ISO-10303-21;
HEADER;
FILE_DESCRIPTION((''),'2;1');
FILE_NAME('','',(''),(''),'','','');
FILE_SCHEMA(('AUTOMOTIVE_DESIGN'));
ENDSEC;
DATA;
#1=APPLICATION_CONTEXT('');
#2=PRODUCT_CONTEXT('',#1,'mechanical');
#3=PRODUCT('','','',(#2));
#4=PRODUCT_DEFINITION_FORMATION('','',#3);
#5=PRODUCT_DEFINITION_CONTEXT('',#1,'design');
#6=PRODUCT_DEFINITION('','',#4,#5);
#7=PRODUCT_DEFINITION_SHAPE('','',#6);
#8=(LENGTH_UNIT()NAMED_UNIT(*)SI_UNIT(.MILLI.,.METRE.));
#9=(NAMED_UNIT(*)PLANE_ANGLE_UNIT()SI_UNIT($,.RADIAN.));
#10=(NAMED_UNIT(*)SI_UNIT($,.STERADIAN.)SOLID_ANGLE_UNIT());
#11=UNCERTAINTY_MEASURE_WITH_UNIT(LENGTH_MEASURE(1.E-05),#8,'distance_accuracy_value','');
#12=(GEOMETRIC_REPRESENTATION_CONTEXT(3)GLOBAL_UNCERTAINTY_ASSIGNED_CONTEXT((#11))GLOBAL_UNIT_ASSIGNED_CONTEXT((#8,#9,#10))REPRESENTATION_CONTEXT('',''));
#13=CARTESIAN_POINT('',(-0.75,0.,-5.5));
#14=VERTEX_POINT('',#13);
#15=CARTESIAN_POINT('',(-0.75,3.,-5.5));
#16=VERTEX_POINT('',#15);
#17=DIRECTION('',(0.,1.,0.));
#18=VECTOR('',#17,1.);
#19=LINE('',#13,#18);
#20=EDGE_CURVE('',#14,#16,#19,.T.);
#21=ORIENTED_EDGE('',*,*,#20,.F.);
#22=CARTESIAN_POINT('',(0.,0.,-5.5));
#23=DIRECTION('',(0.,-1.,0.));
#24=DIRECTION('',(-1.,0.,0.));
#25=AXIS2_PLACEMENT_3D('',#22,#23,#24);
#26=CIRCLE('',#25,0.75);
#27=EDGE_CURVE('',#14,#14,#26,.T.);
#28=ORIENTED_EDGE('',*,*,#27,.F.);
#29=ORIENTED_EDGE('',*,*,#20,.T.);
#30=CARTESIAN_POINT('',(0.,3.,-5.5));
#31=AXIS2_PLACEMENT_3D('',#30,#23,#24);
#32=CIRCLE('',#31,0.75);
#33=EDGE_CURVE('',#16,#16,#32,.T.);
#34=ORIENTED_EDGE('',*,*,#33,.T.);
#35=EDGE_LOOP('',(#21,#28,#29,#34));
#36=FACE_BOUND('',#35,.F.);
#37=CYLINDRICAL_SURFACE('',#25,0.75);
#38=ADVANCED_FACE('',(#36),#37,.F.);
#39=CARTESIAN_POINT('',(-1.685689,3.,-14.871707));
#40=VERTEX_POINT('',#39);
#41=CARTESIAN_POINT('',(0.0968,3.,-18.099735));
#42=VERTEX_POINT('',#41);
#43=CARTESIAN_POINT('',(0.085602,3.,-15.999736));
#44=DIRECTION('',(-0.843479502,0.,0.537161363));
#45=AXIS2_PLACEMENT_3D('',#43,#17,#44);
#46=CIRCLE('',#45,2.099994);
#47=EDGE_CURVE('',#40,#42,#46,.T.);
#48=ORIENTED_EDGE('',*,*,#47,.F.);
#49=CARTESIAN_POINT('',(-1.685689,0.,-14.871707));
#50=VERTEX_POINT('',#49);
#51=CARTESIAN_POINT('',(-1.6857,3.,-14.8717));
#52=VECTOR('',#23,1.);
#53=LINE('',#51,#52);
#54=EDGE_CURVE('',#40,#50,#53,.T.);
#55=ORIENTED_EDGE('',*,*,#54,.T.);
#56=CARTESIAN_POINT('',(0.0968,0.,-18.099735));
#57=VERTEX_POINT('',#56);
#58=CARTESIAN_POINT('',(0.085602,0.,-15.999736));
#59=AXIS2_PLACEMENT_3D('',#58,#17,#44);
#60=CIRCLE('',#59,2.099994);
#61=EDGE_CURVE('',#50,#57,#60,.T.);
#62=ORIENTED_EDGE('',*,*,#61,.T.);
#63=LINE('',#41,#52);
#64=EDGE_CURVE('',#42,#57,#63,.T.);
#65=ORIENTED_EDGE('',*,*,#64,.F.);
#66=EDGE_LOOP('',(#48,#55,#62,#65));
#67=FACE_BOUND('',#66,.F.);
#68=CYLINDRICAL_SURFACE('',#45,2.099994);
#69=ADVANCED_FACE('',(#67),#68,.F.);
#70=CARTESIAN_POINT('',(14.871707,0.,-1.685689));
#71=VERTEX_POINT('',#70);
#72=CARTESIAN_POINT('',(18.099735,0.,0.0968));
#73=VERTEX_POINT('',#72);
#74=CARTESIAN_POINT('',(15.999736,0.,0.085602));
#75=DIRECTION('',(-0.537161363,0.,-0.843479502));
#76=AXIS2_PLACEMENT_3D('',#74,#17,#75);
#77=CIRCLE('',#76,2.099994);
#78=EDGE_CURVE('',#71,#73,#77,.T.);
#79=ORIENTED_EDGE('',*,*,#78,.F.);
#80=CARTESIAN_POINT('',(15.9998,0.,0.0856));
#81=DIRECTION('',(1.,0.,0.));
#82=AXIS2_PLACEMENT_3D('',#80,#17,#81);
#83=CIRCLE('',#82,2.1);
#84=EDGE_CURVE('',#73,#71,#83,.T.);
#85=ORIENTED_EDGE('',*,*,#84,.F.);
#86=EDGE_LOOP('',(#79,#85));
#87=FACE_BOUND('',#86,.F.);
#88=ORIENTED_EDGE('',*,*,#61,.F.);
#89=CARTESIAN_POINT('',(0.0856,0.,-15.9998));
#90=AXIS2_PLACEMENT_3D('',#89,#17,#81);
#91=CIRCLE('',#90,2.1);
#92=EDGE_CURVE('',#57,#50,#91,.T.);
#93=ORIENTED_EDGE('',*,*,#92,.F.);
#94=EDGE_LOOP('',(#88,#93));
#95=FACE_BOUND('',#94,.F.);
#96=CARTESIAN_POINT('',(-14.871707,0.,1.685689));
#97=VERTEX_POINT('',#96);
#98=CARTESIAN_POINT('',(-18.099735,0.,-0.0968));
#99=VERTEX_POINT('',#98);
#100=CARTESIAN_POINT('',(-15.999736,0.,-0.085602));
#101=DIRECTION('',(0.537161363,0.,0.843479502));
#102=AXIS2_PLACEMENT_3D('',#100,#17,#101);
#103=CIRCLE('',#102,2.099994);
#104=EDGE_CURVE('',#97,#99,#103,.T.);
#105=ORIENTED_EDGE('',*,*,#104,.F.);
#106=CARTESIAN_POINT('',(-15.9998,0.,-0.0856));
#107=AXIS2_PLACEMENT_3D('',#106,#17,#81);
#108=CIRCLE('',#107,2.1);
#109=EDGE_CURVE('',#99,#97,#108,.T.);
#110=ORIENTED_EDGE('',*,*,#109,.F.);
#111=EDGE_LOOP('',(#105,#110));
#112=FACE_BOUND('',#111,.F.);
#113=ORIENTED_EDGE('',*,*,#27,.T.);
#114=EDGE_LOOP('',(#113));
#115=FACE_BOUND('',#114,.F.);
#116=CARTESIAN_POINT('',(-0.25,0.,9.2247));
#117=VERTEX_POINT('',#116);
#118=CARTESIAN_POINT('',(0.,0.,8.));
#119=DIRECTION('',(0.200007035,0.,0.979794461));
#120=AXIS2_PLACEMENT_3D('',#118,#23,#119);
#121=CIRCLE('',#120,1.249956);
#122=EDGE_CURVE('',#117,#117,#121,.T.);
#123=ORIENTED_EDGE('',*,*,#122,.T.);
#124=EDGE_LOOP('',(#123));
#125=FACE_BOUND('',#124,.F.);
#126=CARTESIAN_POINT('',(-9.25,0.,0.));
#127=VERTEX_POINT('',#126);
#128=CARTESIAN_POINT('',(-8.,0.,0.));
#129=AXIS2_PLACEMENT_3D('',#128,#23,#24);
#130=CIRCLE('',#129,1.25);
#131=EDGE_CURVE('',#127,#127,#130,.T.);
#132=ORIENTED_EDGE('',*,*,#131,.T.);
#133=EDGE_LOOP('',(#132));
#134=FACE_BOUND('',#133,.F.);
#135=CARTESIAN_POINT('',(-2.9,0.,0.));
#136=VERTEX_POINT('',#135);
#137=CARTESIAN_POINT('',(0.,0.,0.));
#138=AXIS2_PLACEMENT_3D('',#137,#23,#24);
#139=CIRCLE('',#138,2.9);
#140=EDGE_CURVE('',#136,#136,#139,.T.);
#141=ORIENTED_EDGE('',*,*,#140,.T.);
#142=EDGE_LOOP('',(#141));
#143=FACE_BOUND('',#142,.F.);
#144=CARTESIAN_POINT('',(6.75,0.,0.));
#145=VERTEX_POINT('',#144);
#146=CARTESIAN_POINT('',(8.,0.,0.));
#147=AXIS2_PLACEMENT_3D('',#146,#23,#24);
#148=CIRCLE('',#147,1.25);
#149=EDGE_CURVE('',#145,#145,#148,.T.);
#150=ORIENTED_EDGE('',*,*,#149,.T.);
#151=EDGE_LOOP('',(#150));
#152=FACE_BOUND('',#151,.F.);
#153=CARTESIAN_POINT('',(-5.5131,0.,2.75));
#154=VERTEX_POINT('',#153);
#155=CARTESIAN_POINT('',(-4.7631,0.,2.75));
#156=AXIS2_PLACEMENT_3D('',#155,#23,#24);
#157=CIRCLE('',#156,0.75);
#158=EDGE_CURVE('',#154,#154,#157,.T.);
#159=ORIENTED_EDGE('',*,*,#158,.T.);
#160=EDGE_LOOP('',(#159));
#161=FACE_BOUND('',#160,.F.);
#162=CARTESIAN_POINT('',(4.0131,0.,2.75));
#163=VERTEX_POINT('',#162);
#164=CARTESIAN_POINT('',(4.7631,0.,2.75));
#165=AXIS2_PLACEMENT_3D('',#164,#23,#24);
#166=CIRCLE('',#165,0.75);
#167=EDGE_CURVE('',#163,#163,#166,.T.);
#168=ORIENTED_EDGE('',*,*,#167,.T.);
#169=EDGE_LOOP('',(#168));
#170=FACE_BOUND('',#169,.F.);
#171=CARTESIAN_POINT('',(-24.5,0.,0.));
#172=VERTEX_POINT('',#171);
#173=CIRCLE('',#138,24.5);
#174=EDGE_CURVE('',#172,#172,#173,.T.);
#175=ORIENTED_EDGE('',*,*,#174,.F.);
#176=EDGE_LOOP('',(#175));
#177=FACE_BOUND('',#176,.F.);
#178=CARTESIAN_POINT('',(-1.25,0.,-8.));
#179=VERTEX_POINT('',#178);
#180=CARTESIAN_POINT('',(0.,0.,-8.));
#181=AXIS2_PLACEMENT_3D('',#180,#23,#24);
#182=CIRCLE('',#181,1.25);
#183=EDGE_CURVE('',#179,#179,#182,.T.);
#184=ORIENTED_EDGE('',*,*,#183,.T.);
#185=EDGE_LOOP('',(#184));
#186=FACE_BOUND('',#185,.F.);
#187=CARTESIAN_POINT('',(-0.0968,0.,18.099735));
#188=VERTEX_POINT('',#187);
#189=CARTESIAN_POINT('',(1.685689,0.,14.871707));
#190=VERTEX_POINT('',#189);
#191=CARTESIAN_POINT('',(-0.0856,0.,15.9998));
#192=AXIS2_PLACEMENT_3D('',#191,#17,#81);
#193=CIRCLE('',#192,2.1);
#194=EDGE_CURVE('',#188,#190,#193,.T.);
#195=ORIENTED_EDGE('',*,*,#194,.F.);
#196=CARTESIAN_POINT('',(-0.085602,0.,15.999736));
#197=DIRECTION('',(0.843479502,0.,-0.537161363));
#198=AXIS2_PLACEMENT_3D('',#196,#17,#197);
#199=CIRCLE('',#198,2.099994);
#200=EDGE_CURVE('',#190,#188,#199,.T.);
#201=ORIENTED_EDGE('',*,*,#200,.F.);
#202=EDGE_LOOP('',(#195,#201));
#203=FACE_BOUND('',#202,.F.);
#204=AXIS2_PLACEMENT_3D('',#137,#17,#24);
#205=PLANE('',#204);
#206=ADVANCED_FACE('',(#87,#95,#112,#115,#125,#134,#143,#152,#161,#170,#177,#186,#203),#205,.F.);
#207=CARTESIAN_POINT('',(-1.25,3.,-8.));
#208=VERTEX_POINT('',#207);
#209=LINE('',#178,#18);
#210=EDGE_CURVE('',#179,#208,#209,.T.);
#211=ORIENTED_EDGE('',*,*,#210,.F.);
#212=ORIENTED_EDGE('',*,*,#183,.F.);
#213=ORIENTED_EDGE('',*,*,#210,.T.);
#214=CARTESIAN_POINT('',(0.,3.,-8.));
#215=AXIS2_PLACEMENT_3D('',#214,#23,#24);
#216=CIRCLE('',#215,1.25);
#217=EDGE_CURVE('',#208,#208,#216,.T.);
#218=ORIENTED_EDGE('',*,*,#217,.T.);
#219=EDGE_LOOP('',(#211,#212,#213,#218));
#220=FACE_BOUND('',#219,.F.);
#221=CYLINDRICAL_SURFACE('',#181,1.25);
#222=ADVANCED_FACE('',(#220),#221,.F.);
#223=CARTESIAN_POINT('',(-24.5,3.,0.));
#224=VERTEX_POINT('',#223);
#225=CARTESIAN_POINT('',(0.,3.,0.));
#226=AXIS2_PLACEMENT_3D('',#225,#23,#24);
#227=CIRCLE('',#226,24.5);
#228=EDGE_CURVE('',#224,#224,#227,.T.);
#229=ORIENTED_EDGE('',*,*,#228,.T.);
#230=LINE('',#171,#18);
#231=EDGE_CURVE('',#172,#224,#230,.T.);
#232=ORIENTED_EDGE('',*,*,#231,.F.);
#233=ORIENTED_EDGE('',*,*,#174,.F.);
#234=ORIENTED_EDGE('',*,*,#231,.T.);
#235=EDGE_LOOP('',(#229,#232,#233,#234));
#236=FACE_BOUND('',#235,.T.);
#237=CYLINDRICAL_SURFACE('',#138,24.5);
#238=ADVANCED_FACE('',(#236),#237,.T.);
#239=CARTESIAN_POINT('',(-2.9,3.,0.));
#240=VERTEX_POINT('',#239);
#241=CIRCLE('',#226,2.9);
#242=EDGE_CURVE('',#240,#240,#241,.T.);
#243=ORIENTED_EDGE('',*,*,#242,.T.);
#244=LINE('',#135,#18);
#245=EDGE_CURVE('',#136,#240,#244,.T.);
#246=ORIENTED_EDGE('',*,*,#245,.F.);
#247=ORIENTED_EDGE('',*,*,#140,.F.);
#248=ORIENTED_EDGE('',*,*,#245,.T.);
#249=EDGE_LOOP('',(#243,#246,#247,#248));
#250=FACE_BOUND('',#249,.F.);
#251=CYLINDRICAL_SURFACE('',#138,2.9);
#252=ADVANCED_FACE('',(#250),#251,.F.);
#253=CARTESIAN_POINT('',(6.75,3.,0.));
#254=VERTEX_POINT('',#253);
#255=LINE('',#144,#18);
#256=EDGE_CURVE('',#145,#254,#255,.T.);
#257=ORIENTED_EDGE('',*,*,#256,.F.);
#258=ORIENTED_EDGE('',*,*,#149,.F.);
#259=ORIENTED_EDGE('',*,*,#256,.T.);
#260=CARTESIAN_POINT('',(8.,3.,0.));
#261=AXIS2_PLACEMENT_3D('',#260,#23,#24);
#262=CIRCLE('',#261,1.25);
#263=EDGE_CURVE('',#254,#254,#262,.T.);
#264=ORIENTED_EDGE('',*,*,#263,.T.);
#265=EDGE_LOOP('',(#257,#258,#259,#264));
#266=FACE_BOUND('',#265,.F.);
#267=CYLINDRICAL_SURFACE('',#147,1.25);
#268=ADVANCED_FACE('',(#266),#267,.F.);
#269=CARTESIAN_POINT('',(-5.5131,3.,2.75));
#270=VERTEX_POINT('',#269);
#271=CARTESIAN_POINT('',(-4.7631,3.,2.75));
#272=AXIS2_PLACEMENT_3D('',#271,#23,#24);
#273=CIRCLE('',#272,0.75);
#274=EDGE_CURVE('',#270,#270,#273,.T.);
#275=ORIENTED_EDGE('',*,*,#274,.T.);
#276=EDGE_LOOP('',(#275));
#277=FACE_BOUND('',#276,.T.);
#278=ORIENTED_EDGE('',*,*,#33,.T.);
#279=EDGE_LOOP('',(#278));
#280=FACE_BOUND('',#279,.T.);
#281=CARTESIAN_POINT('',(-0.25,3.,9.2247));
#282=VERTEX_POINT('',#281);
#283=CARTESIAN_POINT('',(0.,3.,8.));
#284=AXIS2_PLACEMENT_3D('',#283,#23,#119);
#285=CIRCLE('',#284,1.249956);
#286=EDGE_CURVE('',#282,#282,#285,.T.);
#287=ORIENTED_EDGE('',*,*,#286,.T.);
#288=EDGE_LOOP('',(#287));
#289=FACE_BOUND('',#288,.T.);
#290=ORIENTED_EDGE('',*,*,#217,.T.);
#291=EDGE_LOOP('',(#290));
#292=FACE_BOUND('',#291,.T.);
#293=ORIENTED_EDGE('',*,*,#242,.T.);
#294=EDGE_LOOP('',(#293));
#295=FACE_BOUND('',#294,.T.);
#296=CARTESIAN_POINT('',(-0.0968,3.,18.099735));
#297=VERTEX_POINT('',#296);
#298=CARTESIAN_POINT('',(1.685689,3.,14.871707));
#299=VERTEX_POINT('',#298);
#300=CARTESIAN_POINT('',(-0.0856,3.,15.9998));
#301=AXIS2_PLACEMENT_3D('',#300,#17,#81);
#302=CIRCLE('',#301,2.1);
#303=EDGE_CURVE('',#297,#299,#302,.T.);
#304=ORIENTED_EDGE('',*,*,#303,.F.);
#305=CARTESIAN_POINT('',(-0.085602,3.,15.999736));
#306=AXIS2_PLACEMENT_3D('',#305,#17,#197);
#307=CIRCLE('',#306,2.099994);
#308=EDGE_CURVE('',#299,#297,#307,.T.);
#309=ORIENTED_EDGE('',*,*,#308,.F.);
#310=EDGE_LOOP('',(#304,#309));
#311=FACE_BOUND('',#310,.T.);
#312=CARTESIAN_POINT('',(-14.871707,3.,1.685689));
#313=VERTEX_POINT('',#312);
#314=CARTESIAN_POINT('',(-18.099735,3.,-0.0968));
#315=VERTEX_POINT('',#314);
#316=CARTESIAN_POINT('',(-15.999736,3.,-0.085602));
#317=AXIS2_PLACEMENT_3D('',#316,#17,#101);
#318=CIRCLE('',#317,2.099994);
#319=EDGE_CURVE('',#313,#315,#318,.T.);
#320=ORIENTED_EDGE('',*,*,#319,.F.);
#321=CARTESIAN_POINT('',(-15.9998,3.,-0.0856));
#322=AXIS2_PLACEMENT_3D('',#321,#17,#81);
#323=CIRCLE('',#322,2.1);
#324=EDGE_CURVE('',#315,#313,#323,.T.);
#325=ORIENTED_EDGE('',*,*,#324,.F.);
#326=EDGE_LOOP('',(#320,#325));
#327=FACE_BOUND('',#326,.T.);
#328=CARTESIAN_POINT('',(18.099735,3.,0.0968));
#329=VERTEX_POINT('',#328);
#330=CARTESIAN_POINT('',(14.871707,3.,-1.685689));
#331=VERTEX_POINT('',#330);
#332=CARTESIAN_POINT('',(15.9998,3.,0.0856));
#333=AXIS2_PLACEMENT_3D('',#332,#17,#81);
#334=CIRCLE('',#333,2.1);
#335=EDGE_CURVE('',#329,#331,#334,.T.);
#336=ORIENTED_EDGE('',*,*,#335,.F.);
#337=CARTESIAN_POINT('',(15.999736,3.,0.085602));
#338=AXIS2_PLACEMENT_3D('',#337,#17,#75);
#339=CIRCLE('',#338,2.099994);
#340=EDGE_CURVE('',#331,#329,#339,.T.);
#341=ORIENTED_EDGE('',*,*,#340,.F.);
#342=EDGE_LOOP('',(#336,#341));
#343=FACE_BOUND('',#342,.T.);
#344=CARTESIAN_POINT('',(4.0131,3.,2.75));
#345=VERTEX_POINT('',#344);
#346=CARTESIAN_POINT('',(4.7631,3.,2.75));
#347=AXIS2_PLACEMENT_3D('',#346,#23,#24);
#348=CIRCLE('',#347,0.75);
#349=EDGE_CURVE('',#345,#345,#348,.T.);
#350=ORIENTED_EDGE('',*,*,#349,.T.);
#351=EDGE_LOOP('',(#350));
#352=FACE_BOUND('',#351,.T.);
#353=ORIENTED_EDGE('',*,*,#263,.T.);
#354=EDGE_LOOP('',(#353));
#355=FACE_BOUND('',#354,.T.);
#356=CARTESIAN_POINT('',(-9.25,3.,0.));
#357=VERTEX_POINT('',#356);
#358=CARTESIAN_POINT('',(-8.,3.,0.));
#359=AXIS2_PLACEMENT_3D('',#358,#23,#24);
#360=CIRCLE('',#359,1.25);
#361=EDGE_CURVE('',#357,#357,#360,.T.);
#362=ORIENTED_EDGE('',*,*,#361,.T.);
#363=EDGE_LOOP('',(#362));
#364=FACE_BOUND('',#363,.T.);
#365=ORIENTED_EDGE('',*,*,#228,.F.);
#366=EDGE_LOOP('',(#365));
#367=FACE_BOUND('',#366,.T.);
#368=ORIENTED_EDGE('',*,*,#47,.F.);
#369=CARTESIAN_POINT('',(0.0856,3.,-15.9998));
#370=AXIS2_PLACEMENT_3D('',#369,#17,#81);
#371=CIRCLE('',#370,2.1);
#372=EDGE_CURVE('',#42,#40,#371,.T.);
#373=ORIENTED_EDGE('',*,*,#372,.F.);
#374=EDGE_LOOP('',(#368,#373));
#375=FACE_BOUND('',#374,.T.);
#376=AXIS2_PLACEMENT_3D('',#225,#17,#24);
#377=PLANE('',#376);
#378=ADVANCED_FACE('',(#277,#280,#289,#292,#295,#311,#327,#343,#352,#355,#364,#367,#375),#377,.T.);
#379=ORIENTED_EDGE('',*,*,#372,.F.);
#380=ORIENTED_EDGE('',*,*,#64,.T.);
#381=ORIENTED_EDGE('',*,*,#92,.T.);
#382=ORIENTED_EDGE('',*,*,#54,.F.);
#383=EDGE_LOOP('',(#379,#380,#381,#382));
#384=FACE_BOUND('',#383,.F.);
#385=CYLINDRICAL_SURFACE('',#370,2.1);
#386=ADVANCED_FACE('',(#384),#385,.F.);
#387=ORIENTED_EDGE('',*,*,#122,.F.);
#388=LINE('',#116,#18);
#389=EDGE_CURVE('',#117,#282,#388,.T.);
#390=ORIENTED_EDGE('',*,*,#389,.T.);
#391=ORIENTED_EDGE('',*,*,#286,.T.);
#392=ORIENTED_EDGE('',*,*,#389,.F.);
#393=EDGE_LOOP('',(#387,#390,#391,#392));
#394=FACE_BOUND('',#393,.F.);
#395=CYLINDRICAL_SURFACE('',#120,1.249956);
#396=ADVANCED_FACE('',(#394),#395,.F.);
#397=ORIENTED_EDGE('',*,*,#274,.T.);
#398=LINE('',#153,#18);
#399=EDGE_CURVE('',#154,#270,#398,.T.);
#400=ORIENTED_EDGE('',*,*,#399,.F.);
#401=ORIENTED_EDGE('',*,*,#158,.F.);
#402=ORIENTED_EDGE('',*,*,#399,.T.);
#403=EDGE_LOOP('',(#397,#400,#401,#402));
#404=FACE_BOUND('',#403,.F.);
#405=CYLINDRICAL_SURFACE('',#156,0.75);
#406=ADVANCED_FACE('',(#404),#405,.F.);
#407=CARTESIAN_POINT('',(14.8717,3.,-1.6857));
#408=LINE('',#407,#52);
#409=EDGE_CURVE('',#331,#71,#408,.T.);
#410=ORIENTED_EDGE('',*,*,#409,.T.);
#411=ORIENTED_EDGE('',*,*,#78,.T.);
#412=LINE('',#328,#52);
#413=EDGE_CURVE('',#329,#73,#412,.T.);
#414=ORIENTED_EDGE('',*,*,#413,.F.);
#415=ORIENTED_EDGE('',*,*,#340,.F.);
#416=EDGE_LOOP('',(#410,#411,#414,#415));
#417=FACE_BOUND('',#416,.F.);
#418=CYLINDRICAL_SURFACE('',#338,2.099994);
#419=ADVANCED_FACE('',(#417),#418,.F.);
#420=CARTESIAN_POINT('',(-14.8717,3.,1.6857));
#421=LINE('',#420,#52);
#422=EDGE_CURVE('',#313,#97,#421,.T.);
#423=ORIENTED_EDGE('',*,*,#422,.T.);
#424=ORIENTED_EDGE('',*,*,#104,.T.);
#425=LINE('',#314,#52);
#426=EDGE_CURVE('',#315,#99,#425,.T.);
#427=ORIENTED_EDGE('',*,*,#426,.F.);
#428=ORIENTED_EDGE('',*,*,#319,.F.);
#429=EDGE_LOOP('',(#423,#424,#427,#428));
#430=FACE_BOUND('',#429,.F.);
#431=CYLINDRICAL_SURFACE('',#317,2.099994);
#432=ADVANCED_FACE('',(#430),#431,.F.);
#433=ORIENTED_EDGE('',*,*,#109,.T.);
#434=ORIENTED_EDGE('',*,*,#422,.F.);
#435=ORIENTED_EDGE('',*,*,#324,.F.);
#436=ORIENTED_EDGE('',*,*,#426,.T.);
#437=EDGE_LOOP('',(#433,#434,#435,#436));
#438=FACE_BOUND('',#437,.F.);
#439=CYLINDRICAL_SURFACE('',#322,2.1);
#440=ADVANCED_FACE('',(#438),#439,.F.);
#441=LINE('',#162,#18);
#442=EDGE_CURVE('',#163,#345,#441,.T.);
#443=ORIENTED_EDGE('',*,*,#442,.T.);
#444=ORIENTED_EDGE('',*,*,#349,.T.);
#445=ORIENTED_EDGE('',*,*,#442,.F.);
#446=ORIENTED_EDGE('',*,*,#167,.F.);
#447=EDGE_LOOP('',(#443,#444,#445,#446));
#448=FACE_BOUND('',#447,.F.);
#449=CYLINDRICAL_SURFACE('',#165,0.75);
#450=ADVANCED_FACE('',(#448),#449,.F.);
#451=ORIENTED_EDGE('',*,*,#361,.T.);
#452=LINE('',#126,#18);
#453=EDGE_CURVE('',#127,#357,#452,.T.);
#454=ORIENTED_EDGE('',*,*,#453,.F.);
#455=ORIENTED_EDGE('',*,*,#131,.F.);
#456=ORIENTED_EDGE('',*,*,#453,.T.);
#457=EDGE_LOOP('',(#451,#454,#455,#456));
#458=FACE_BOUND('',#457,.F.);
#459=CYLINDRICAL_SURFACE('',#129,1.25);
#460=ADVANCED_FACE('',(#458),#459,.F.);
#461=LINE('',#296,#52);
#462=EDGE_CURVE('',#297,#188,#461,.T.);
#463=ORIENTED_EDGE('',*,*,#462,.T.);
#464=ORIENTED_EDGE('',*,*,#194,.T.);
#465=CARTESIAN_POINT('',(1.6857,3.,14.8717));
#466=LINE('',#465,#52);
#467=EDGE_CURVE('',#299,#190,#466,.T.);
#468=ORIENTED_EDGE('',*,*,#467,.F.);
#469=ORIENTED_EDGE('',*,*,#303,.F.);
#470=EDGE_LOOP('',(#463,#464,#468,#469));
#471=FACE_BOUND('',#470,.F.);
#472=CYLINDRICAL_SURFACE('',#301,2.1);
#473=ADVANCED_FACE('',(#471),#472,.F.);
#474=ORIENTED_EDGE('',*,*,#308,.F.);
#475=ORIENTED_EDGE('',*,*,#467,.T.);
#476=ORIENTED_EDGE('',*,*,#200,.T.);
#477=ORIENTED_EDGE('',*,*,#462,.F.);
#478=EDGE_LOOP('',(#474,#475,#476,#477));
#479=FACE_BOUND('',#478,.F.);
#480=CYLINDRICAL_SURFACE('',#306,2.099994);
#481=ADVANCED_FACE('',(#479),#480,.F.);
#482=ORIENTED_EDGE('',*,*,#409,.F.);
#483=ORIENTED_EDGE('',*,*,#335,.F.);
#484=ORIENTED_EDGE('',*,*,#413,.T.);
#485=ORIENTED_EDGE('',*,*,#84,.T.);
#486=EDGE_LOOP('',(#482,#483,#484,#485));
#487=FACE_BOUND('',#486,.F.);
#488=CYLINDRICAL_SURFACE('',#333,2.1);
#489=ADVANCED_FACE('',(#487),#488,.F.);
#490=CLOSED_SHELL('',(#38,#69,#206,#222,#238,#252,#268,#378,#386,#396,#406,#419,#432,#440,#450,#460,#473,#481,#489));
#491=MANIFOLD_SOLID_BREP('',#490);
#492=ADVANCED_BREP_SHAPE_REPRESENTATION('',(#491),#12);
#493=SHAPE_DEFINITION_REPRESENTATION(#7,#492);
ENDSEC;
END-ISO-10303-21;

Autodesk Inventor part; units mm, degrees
ref_plane "YZ Plane" through (0, 0, 0) normal (1, 0, 0) x (0, 1, 0)
ref_plane "XZ Plane" through (0, 0, 0) normal (0, 1, 0) x (-1, 0, 0)
ref_plane "XY Plane" through (0, 0, 0) normal (0, 0, 1) x (1, 0, 0)
sketch "Эскиз1" plane through (0, 0, 0) normal (0, 1, 0) x (-1, 0, 0)
  arc A0 (-0.25, 9.2247) -> (0.25, 9.2247) centre (0, 8) ccw
  line L0 (-0.25, 10.9972) -> (-0.25, 9.2247)
  arc A1 (-0.25, 10.9972) -> (-1.1469, -10.94) centre (0, 0) ccw
  line L1 (-1.1469, -10.6297) -> (-1.1469, -10.94)
  line L2 (-0.8473, -10.6297) -> (-1.1469, -10.6297)
  line L3 (-0.8473, -10.9673) -> (-0.8473, -10.6297)
  arc A2 (-0.8473, -10.9673) -> (0.8535, -10.9668) centre (0, 0) ccw
  line L4 (0.8535, -10.6297) -> (0.8535, -10.9668)
  line L5 (1.1541, -10.6297) -> (0.8535, -10.6297)
  line L6 (1.1541, -10.9393) -> (1.1541, -10.6297)
  arc A3 (1.1541, -10.9393) -> (0.25, 10.9972) centre (0, 0) ccw
  line L7 (0.25, 9.2247) -> (0.25, 10.9972)
  circle A4 centre (8, 0) radius 1.25
  circle A5 centre (0, -8) radius 1.25
  circle A6 centre (-8, 0) radius 1.25
  circle A7 centre (0, -5.5) radius 0.75
  circle A8 centre (4.7631, 2.75) radius 0.75
  circle A9 centre (-4.7631, 2.75) radius 0.75
  circle A10 centre (0, 0) radius 2.9
  arc A11 (0.25, 9.2247) -> (-0.25, 9.2247) centre (0, 8) ccw
  circle A12 centre (0, 0) radius 22.5
  point P0 (0, 0)
  dimension "d8" = 45
extrude "Выдавливание1" add sketch "Эскиз1" along normal blind 3 contours A0 L7 A3 L6 L5 L4 A2 L3 L2 L1 A1 L0 | A12
sketch "Эскиз2" plane through (0, 3, 0) normal (0, 1, 0) x (1, 0, 0)
  arc A0 (-14.8717, -1.6857) -> (-18.0997, 0.0968) centre (-15.9998, 0.0856) ccw
  arc A1 (-6.8718, -1.7285) -> (-9.1468, -1.7163) centre (-7.9999, 0.0428) ccw
  circle A2 centre (0, 0) radius 4
  arc A3 (-1.7285, 6.8718) -> (-1.7163, 9.1468) centre (0.0428, 7.9999) ccw
  arc A4 (-1.6857, 14.8717) -> (0.0968, 18.0997) centre (0.0856, 15.9998) ccw
  arc A5 (6.8718, 1.7285) -> (9.1468, 1.7163) centre (7.9999, -0.0428) ccw
  arc A6 (14.8717, 1.6857) -> (18.0997, -0.0968) centre (15.9998, -0.0856) ccw
  arc A7 (1.7285, -6.8718) -> (1.7163, -9.1468) centre (-0.0428, -7.9999) ccw
  arc A8 (1.6857, -14.8717) -> (-0.0968, -18.0997) centre (-0.0856, -15.9998) ccw
  circle A9 centre (-15.9998, 0.0856) radius 2.1
  circle A10 centre (-7.9999, 0.0428) radius 2.1
  circle A11 centre (0, 0) radius 4
  circle A12 centre (0.0428, 7.9999) radius 2.1
  circle A13 centre (0.0856, 15.9998) radius 2.1
  circle A14 centre (7.9999, -0.0428) radius 2.1
  circle A15 centre (15.9998, -0.0856) radius 2.1
  circle A16 centre (-0.0428, -7.9999) radius 2.1
  circle A17 centre (-0.0856, -15.9998) radius 2.1
  dimension "d4" = 4.2
extrude "Выдавливание2" cut sketch "Эскиз2" against normal blind 10 contours A9 A0 | A13 A4 | A15 A6 | A17 A8
offset faces "Размер1" outward 2 faces at (-22.427, 2, -1.8105)
sketch "Эскиз3" plane through (0, 3, 0) normal (0, 1, 0) x (1, 0, 0)
  circle A0 centre (15.9998, -0.0856) radius 2.1 projected
  circle A1 centre (-15.9998, 0.0856) radius 2.1 projected
  circle A2 centre (0.0856, 15.9998) radius 2.1 projected
  circle A3 centre (-0.0856, -15.9998) radius 2.1 projected
  circle A4 centre (0, 0) radius 2.9 projected
  circle A5 centre (8, 0) radius 1.25 projected
  circle A6 centre (0, 8) radius 1.25 projected
  circle A7 centre (-8, 0) radius 1.25 projected
  circle A8 centre (4.7631, -2.75) radius 0.75 projected
  circle A9 centre (-4.7631, -2.75) radius 0.75 projected
  circle A10 centre (0, 5.5) radius 0.75 projected
  circle A11 centre (0, -8) radius 1.25 projected
  circle A12 centre (0, 0) radius 24.5 projected
properties part number "КВ33.044.405 -  Боковина шкива"
